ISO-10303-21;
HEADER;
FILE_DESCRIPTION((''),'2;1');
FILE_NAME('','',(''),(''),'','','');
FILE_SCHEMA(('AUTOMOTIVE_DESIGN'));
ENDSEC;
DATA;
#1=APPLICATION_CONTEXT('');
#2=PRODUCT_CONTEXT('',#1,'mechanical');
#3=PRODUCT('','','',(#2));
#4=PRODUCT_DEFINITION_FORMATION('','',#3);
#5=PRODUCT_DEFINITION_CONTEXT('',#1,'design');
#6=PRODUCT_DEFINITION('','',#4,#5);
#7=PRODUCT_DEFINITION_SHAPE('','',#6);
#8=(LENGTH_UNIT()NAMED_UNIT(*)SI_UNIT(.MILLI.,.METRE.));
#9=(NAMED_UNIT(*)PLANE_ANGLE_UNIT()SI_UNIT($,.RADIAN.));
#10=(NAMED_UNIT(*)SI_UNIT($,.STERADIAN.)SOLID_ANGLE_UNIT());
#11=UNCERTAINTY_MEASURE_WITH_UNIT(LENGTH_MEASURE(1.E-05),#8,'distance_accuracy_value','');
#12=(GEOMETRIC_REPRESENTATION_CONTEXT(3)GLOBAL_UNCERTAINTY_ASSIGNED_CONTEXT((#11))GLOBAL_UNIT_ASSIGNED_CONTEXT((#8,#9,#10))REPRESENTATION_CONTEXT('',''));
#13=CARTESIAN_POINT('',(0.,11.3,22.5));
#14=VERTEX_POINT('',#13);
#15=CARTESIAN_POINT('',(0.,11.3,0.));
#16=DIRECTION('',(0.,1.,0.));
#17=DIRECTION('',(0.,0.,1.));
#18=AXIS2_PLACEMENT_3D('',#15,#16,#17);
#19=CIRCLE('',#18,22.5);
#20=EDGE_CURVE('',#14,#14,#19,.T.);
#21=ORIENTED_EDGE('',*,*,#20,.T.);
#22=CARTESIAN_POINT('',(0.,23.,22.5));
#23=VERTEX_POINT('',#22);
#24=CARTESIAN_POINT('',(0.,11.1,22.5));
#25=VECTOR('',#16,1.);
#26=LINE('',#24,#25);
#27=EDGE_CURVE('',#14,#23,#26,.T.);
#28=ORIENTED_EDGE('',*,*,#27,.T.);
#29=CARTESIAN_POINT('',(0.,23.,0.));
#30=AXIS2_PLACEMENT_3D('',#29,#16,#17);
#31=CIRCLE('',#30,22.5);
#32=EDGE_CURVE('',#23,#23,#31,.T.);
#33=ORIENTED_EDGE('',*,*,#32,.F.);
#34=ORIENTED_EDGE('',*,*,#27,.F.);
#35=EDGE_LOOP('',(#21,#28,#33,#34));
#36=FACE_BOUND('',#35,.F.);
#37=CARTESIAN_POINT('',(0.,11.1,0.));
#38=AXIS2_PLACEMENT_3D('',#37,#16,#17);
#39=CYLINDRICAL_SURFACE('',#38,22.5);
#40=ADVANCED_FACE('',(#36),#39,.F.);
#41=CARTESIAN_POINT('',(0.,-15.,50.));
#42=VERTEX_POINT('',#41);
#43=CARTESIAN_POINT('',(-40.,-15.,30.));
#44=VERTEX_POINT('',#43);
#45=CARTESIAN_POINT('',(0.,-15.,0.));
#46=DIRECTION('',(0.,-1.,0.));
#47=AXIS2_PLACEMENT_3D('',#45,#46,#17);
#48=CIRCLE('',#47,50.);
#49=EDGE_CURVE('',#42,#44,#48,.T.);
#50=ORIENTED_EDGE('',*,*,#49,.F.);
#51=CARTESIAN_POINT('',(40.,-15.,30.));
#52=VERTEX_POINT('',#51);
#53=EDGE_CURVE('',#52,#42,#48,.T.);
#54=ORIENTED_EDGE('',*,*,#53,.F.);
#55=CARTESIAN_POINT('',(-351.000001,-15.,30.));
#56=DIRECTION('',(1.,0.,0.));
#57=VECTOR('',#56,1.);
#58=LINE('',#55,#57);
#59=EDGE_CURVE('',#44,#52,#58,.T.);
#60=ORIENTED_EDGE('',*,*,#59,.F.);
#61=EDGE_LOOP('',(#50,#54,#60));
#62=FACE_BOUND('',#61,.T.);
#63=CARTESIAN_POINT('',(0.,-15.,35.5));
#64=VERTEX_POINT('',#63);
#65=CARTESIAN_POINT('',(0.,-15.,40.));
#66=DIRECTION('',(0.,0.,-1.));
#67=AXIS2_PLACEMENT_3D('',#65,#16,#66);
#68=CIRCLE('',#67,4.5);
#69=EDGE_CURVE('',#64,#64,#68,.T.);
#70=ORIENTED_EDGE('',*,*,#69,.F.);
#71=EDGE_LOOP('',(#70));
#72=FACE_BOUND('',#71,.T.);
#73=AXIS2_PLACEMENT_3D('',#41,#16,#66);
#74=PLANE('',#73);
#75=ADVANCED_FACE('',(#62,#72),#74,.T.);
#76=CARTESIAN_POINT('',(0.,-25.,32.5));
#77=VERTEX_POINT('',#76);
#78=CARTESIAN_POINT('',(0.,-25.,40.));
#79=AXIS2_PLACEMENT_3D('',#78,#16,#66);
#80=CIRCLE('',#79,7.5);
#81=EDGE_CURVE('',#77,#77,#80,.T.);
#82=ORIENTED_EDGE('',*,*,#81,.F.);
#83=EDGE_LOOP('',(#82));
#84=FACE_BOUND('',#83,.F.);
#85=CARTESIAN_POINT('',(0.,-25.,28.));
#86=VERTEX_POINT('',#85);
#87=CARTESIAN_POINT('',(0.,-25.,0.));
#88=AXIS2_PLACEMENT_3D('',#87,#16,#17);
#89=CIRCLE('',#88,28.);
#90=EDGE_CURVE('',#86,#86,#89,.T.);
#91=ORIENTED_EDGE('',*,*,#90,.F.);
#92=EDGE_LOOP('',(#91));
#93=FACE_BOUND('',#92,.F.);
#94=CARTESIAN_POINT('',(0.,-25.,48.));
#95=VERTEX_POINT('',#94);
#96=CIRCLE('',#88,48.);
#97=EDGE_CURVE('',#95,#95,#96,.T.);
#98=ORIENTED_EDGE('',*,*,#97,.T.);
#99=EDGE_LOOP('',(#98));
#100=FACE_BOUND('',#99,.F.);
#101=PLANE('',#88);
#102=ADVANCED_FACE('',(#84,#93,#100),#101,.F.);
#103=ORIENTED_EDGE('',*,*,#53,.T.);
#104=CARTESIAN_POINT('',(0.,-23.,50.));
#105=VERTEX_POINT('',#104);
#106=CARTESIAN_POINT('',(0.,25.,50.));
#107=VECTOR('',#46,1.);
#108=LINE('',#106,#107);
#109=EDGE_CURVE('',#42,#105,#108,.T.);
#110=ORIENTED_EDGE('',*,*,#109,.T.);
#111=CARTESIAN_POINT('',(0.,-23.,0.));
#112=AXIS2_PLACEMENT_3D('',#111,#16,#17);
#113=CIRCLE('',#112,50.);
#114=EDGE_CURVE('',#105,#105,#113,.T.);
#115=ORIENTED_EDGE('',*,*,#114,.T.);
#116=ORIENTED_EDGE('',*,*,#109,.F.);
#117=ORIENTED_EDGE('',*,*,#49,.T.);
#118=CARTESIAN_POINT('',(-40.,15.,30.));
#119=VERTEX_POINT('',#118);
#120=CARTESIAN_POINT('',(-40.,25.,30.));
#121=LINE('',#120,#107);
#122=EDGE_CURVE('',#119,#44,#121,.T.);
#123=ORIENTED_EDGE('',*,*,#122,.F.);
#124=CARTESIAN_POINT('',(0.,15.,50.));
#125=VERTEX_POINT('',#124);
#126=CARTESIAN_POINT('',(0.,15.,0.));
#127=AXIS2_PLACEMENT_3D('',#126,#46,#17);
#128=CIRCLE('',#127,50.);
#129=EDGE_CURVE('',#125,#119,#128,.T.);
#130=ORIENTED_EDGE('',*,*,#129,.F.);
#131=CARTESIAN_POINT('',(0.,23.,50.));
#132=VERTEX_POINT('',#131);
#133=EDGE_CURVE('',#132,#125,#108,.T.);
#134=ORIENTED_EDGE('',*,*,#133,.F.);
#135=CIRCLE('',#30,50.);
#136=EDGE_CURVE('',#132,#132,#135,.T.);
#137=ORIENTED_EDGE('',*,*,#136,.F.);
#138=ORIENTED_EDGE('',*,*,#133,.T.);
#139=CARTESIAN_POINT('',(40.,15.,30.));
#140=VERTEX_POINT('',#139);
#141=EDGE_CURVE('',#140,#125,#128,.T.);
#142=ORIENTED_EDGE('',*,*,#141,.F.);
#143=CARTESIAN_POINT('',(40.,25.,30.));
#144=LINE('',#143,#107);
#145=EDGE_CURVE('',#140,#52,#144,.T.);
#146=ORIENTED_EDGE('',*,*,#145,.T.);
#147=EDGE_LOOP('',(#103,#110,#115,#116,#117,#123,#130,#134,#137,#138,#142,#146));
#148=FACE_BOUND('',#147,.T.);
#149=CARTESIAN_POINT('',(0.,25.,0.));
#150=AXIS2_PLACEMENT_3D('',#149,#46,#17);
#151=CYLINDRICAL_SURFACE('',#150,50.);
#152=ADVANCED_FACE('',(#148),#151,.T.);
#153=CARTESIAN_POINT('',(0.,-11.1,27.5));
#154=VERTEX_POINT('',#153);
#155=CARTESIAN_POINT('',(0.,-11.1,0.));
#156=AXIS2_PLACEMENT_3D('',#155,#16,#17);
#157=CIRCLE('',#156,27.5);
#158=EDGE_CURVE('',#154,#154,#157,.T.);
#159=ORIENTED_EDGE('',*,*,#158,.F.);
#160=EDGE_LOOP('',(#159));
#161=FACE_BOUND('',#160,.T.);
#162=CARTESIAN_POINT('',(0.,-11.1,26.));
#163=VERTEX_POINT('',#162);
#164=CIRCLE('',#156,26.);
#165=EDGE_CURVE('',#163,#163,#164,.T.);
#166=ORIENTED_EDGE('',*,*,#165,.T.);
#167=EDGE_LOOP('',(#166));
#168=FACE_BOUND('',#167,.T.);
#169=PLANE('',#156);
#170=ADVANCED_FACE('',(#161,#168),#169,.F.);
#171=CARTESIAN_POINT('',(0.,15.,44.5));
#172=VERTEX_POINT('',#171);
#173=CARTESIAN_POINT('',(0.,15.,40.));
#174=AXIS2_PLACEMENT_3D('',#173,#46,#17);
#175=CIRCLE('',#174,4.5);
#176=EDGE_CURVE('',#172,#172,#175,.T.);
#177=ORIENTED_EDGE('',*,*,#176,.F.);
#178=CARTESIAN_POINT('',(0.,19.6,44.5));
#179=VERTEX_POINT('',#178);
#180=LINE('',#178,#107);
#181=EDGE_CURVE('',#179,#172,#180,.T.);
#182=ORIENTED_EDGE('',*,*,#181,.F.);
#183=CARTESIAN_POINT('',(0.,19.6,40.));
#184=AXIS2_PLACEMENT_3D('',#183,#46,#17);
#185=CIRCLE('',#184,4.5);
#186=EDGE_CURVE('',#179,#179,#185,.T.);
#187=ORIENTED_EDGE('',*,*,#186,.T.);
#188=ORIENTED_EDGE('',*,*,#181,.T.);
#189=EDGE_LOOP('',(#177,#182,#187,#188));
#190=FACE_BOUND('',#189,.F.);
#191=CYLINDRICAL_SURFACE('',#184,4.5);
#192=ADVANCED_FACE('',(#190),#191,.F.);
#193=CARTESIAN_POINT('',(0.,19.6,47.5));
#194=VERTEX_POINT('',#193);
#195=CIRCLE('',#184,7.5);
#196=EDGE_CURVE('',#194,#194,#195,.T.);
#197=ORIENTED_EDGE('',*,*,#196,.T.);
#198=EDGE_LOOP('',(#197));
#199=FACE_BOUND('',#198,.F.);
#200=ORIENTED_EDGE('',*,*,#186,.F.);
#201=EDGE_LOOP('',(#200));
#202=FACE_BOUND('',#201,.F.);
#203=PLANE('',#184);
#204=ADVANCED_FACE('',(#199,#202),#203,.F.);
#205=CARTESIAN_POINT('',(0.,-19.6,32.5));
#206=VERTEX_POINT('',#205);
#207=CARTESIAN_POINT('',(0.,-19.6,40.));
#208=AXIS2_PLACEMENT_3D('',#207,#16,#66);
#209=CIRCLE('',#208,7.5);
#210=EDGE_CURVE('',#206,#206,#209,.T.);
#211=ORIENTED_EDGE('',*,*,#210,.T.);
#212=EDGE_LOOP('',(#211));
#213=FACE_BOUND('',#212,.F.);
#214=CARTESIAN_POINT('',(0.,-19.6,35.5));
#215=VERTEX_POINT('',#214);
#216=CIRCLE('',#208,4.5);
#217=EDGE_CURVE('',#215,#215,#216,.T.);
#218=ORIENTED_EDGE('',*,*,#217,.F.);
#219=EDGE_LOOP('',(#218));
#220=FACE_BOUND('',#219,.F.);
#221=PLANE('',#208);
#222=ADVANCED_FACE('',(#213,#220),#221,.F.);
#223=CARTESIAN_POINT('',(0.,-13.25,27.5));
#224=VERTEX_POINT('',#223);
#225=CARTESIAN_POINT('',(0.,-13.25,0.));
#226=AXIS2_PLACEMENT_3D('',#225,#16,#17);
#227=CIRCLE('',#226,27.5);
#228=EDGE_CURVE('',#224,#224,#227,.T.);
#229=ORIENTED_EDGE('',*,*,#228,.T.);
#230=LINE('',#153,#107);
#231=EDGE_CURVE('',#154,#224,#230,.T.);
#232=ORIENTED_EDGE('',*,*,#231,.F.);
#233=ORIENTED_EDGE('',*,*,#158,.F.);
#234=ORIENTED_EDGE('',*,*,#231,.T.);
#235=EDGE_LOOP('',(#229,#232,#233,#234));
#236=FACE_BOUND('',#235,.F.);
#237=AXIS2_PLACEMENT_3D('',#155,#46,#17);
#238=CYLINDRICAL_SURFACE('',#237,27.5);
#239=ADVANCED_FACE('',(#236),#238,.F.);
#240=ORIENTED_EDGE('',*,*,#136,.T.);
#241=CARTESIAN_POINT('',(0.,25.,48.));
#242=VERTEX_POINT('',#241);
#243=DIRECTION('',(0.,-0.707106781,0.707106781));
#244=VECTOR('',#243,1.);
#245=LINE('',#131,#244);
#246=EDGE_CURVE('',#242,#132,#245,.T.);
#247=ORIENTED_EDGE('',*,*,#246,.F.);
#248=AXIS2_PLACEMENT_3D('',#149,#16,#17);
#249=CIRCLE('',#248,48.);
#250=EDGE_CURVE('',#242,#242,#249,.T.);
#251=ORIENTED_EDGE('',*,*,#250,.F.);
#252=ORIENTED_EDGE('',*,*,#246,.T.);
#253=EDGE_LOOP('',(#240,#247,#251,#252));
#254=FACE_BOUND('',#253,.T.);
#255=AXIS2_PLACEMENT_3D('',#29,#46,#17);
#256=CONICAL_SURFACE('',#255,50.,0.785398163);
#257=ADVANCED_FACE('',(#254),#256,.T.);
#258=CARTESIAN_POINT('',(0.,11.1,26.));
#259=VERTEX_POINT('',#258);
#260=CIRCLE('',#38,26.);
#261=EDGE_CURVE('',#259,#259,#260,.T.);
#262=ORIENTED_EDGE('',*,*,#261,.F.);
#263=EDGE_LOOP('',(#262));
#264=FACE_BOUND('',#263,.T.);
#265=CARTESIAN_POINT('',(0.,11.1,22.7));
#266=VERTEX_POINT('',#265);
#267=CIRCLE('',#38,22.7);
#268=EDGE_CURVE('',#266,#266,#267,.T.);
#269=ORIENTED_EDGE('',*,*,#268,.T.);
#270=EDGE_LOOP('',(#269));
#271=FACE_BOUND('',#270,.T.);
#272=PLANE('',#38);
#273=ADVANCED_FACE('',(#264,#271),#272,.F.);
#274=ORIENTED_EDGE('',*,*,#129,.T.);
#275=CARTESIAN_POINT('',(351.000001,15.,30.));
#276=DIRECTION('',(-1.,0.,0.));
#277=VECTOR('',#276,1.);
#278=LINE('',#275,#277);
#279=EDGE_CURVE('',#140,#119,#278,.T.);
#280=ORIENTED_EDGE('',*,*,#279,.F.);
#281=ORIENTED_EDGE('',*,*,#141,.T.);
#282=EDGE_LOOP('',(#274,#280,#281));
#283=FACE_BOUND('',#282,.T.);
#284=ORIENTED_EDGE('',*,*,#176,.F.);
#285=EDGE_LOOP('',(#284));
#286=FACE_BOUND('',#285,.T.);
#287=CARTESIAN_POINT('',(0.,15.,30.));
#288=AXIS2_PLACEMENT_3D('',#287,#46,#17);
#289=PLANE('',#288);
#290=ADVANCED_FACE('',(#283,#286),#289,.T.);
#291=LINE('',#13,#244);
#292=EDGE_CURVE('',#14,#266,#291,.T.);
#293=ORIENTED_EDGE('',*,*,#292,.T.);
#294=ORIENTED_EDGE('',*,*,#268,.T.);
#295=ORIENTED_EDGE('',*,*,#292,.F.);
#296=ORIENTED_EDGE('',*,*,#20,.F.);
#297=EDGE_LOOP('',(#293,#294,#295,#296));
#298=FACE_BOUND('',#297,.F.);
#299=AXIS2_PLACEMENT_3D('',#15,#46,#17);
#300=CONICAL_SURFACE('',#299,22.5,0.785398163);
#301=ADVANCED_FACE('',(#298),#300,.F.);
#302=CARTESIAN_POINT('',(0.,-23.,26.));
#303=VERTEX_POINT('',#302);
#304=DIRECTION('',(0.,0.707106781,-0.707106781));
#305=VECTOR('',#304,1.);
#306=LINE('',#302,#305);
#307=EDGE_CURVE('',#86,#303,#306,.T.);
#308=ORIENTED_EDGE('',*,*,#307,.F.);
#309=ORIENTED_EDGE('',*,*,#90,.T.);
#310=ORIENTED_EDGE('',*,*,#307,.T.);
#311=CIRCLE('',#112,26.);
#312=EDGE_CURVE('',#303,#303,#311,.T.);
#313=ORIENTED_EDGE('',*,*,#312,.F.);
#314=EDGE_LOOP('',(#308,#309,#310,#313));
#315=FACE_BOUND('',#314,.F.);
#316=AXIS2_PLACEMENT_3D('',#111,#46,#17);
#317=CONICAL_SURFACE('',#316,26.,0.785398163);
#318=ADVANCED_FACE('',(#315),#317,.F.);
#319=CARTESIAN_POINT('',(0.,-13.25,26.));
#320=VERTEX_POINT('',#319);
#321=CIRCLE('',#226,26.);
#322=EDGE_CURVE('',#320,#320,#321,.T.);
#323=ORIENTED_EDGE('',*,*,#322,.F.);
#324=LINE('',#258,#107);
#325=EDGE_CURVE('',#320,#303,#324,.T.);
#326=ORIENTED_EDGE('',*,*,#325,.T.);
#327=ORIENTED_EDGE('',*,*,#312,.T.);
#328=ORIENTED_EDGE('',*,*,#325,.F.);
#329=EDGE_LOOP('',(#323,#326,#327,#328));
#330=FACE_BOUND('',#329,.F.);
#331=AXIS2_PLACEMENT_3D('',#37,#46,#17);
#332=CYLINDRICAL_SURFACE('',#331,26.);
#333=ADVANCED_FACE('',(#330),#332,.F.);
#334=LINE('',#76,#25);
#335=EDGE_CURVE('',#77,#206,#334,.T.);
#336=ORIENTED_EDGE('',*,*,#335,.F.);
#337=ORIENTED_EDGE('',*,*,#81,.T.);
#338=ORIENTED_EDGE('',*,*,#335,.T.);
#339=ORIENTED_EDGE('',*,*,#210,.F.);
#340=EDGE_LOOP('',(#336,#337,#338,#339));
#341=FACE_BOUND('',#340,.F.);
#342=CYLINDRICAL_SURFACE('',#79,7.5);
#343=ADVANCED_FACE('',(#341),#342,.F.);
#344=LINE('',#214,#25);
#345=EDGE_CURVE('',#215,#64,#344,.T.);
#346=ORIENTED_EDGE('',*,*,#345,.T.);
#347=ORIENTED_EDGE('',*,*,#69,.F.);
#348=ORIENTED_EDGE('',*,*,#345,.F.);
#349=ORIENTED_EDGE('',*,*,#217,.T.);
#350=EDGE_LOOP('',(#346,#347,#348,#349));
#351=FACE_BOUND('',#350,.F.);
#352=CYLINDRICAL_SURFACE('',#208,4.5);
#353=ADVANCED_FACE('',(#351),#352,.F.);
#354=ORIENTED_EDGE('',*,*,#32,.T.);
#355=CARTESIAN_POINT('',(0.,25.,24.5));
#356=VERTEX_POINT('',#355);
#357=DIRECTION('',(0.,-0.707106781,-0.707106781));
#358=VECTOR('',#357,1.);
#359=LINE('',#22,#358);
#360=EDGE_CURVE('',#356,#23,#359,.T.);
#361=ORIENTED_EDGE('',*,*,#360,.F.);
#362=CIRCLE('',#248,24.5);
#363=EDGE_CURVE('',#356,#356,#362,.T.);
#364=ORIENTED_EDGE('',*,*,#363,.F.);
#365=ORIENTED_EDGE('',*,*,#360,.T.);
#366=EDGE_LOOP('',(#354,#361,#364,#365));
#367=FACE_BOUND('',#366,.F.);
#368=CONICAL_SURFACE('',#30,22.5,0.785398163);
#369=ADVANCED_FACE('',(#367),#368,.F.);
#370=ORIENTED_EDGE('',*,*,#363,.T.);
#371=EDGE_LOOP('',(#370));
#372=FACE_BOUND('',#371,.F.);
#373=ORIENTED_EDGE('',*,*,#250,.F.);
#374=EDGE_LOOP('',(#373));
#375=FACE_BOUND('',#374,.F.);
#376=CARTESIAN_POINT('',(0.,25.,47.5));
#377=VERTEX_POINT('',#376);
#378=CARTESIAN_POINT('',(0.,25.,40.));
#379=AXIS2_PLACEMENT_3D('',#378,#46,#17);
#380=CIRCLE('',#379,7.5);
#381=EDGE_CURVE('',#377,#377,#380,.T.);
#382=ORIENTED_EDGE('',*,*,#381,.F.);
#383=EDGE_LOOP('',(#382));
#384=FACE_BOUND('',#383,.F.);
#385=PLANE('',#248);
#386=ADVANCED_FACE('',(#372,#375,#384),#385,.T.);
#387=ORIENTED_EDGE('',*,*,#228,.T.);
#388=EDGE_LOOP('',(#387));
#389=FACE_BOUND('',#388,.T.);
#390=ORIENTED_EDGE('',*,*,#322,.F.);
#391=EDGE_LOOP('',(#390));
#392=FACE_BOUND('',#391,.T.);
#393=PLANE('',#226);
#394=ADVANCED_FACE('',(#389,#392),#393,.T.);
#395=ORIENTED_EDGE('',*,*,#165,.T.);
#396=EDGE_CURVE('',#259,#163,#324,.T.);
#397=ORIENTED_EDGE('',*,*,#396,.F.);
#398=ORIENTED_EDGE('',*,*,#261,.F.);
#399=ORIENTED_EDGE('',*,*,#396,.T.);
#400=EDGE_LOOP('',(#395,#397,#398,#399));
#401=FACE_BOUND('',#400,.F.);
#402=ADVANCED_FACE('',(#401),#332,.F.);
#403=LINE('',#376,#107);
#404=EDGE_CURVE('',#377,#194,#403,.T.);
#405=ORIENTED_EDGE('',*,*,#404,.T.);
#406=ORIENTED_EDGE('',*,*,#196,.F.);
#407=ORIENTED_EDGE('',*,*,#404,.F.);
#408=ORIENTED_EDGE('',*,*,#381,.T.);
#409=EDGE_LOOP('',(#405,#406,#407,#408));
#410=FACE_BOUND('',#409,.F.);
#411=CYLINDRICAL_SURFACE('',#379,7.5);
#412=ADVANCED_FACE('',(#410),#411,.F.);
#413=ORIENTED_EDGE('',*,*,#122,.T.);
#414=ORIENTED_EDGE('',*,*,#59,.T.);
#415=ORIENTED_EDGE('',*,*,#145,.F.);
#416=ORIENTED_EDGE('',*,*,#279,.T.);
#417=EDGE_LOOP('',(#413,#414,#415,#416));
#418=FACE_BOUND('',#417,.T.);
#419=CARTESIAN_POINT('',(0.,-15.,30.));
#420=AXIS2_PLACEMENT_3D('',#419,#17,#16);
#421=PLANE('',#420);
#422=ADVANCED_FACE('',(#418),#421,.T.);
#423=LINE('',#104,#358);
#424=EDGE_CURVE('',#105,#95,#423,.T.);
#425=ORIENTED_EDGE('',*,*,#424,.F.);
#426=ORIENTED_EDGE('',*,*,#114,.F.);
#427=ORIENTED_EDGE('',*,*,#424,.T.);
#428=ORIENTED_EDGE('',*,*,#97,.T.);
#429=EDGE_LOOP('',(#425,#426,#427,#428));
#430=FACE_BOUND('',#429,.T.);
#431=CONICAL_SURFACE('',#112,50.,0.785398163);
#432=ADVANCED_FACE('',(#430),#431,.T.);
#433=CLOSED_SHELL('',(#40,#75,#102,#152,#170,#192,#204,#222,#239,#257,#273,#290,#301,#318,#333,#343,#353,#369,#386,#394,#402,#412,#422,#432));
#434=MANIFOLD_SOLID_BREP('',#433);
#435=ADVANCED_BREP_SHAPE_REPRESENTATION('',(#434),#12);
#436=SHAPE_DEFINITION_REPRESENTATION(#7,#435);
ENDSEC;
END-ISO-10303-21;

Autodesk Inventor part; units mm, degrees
ref_plane "YZ Plane" through (0, 0, 0) normal (1, 0, 0) x (0, 1, 0)
ref_plane "XZ Plane" through (0, 0, 0) normal (0, 1, 0) x (-1, 0, 0)
ref_plane "XY Plane" through (0, 0, 0) normal (0, 0, 1) x (1, 0, 0)
sketch "Skizze3" plane through (0, 0, 0) normal (1, 0, 0) x (0, 1, 0)
  line L0 (0, 60) -> (0, -10) construction
  line L1 (-35, 0) -> (35, 0) construction
  line L2 (25, 0) -> (25, 22.5) construction
  line L3 (25, 50) -> (-25, 50)
  line L4 (-25, 50) -> (-25, 26)
  line L5 (11.1, 0) -> (11.1, 26) construction
  line L6 (11.1, 26) -> (-11.1, 26) construction
  line L7 (-11.1, 26) -> (-11.1, 0) construction
  line L8 (11.1, 22.5) -> (25, 22.5)
  line L9 (11.1, 22.5) -> (11.1, 26)
  line L10 (11.1, 26) -> (-25, 26)
  line L11 (-25, 26) -> (-25, 0) construction
  line L12 (25, 22.5) -> (25, 50)
  point P0 (0, 0)
  dimension "d8" = 100
  dimension "d9" = 50
  dimension "d10" = 52
  dimension "d11" = 22.2
  dimension "d13" = 45
revolve "Grundkörper" add sketch "Skizze3" angle 360 about axis through (0, 0, 0) along (0, 1, 0)
sketch "Skizze4" plane through (0, 0, 0) normal (1, 0, 0) x (0, 1, 0)
  line L0 (-25, 50) -> (25, 50) construction
  line L1 (0, 48) -> (0, -8) construction
  line L2 (-15, 50) -> (-15, 30)
  line L3 (-15, 30) -> (15, 30)
  line L4 (15, 30) -> (15, 50)
  line L5 (-15, 50) -> (15, 50)
  point P0 (0, 0)
  dimension "d17" = 30
  dimension "d18" = 20
extrude "Profil_Ausschnitt" cut sketch "Skizze4" along normal through all both and the other way through all
sketch "Skizze5" plane through (0, -25, 0) normal (0, -1, 0) x (1, 0, 0)
  circle A0 centre (0, 0) radius 50 construction
  line L0 (0, 70) -> (0, -70) construction
  line L1 (-40, 30) -> (40, 30) construction
  line L2 (0, 30) -> (0, 50) construction
  point P0 (0, 40)
hole "DIN7984_M8_Boh" at (0, -25, 40) direction (0, 1, 0) diameter 9 end up to surface counterbore diameter 15 counterbore depth 5.4
mirror "Spiegelung_DIN7984_M8_Boh" about plane through (0, 0, 0) normal (0, 1, 0) of "DIN7984_M8_Boh"
sketch "Skizze7" plane through (0, 0, 0) normal (1, 0, 0) x (0, 1, 0)
  line L0 (-35, 0) -> (35, 0) construction
  line L1 (11.1, -26) -> (11.1, 26) construction
  line L2 (11.1, 26) -> (-25, 26) construction
  line L3 (-11.1, 26) -> (-11.1, 27.5)
  line L4 (-11.1, 27.5) -> (-13.25, 27.5)
  line L5 (-13.25, 27.5) -> (-13.25, 26)
  line L6 (-11.1, 26) -> (-13.25, 26)
  point P0 (0, 0)
  dimension "d34" = 55
  dimension "d35" = 2.15
  dimension "d36" = 22.2
revolve "DIN472-52x2-Nut" cut sketch "Skizze7" angle 360 about axis through (0, 0, 0) along (0, 1, 0)
chamfer "Fase_Allgemein" distance 2 angle 45 4 edges at (0, -25, -50) (0, 25, -50) (0, -25, -26) (0, 25, -22.5)
chamfer "Fase2" distance 0.2 angle 45 1 edges at (0, 11.1, -22.5)
properties part number "200-30-ROCKER-BOGIE-BEARING-01" material "Aluminium 6061"
